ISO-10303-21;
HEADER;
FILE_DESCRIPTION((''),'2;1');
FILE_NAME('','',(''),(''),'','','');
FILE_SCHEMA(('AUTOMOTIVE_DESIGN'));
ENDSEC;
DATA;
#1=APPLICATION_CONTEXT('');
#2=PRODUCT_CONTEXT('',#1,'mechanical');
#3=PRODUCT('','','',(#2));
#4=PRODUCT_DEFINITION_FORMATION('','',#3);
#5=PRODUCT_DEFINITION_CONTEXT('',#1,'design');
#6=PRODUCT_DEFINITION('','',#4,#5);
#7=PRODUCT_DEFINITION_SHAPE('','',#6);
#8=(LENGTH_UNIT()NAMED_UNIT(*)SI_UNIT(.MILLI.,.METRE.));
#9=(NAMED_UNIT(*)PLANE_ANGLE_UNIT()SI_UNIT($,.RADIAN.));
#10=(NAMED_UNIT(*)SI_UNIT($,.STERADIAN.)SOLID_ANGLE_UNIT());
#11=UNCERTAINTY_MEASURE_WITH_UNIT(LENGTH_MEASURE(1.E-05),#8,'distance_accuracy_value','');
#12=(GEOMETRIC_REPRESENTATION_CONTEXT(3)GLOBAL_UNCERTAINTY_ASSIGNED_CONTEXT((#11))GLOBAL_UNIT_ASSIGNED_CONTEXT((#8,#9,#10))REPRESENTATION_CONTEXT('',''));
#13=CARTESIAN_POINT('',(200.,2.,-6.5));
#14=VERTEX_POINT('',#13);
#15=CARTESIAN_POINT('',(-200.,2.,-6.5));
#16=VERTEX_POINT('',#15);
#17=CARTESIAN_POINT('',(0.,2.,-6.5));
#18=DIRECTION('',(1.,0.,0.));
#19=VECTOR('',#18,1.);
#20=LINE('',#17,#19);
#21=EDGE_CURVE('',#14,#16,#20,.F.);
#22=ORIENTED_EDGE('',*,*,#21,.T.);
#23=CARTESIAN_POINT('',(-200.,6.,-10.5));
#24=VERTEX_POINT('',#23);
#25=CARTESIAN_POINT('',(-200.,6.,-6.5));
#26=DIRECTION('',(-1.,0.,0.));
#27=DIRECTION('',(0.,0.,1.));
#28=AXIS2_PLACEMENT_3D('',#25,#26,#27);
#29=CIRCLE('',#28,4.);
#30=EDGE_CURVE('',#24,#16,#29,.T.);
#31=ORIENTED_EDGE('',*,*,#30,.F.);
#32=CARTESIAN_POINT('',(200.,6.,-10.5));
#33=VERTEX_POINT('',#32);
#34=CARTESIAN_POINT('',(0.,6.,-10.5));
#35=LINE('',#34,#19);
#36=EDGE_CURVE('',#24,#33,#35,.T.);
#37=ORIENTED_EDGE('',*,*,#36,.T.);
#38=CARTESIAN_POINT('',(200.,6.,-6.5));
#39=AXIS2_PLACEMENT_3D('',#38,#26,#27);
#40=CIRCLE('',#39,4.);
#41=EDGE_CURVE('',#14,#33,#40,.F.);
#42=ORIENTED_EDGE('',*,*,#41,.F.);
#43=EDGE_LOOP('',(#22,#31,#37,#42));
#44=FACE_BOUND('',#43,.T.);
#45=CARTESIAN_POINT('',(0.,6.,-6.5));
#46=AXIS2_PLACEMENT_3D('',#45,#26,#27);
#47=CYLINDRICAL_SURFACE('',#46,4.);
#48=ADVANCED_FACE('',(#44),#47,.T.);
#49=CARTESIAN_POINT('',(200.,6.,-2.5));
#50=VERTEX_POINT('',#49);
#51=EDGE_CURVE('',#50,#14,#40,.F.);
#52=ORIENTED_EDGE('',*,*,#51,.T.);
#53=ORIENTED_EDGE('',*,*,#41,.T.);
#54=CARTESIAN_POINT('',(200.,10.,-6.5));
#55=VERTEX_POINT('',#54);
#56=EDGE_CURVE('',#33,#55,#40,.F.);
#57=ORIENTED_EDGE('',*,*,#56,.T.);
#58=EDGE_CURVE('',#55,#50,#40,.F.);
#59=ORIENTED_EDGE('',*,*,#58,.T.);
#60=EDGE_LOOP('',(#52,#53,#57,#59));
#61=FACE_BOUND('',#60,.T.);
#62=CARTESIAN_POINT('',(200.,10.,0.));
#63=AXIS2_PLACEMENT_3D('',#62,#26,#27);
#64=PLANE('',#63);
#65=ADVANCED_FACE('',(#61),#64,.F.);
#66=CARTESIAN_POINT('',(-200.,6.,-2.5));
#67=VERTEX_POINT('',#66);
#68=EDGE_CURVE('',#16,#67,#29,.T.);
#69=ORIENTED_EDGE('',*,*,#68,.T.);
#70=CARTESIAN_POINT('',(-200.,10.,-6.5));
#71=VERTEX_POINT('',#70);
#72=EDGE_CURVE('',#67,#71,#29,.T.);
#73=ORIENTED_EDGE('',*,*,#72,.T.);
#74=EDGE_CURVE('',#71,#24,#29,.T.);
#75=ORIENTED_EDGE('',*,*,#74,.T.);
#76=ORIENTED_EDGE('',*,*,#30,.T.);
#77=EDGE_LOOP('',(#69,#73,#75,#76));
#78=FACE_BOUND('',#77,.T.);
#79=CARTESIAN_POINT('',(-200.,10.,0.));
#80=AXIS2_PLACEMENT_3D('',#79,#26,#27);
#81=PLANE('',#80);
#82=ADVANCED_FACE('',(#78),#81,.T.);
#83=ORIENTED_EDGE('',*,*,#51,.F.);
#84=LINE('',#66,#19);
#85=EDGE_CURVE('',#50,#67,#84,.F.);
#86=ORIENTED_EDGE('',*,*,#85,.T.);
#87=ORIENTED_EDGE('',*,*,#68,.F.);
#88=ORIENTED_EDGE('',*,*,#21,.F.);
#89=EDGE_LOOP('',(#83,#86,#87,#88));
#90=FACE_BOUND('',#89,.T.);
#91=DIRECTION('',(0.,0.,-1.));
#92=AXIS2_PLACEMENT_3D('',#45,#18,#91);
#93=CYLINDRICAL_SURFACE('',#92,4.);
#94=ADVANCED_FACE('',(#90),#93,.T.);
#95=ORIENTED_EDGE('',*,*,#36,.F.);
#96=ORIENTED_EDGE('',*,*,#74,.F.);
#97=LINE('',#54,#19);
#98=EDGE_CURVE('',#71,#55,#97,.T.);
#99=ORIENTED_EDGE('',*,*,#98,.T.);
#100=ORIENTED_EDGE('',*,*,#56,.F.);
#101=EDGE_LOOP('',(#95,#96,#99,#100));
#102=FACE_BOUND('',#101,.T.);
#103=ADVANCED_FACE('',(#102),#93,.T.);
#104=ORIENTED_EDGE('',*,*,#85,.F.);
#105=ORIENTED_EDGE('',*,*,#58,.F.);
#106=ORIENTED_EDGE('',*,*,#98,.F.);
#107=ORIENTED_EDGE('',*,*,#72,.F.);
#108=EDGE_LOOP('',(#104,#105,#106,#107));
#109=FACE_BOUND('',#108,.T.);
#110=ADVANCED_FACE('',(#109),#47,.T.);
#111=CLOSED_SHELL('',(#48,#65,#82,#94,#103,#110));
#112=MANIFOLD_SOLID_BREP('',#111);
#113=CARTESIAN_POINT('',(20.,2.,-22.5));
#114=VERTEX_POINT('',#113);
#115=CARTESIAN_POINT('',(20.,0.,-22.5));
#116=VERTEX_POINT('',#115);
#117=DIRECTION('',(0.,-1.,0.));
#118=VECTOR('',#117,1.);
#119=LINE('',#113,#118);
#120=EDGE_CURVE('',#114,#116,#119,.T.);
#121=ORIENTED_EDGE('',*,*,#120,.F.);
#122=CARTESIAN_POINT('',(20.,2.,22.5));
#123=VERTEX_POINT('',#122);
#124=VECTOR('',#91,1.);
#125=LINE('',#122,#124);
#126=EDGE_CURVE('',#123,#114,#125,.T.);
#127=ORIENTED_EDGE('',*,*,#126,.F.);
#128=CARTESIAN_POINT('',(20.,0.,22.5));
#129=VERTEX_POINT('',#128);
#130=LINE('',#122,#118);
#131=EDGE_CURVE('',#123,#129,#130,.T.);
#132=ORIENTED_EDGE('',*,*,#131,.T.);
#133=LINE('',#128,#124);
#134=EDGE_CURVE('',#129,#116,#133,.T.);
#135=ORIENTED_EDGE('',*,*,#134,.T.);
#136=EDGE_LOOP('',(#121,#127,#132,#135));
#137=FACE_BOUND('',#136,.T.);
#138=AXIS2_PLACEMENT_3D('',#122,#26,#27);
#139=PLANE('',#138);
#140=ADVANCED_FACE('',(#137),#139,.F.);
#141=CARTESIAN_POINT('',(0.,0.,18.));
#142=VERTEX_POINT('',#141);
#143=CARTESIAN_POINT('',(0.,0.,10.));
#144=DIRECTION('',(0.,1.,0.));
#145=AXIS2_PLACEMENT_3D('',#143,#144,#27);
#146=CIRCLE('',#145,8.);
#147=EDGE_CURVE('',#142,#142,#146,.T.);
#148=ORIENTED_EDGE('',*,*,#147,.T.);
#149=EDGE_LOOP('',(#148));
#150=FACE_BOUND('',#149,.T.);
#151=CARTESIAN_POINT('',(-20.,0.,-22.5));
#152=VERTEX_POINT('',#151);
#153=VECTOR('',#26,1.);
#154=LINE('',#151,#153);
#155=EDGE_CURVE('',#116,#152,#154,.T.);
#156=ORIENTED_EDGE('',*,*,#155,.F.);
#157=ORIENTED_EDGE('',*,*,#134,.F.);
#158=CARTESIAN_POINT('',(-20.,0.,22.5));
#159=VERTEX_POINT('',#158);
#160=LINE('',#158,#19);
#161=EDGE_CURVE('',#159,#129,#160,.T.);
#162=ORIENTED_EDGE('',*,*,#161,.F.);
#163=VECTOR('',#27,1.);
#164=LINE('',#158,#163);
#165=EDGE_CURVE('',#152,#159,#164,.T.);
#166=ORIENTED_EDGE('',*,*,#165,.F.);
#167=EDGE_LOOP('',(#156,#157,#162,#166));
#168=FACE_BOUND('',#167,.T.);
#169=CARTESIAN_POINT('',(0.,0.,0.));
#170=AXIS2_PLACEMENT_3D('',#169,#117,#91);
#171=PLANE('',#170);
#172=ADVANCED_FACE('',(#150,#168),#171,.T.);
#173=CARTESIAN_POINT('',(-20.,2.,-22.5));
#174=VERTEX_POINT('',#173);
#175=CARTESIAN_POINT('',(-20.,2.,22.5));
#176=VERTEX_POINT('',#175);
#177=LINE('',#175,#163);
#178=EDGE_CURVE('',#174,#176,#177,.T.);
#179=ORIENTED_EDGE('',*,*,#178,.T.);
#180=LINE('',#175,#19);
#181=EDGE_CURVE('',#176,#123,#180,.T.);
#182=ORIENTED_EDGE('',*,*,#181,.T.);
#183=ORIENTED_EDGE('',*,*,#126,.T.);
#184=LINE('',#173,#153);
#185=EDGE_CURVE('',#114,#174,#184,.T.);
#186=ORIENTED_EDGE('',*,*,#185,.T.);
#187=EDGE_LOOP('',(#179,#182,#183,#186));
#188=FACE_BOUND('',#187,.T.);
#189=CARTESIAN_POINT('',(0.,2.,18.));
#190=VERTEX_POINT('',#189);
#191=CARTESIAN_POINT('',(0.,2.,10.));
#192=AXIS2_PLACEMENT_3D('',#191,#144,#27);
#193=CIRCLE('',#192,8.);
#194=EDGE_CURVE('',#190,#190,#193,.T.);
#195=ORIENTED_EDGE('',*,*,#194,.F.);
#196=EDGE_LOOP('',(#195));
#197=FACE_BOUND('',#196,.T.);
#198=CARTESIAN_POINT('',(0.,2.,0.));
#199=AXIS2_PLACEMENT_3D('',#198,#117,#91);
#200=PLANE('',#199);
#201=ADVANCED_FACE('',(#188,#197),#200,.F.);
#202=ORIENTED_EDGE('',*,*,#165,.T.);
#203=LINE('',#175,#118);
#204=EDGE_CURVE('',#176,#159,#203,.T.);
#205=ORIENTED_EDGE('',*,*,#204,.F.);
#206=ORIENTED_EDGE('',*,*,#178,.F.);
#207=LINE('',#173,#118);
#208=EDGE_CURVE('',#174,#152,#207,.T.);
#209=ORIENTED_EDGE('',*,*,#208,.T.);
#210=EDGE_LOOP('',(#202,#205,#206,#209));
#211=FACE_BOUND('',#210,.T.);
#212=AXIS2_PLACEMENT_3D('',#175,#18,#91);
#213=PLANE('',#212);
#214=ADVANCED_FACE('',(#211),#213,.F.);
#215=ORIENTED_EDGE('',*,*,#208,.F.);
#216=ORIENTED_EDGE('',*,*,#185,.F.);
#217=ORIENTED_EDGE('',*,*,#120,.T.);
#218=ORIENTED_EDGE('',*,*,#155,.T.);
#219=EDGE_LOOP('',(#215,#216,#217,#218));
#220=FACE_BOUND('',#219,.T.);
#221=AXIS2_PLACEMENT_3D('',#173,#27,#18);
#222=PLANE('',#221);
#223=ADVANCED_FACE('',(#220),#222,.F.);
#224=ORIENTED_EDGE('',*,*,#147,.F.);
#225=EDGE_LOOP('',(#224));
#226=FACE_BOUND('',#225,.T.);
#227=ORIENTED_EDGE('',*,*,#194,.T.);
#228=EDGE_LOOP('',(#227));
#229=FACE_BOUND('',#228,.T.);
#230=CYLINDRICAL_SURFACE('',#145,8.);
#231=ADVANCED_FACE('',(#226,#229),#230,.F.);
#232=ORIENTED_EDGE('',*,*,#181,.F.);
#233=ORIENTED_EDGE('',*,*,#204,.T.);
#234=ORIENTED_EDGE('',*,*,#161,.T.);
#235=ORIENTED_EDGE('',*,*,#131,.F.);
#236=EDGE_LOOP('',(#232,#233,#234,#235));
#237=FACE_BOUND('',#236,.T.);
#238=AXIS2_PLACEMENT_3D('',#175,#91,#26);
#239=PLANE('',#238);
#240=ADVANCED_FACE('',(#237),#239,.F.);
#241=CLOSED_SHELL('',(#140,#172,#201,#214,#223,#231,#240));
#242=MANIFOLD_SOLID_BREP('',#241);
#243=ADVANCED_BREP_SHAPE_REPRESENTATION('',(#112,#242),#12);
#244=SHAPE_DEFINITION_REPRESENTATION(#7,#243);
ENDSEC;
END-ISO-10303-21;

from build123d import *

# Parameters (mm, degrees)
SKETCH3_W           = 40
SKETCH3_H           = 45
BOSS_EXTRUDE1_DEPTH = 2
BOSS_EXTRUDE3_DEPTH = 8
FILLET2_R           = 4
SKETCH5_R           = 8
CUT_EXTRUDE1_DEPTH  = 202.420579882


with BuildPart() as part:
    # Sketch3 → Boss-Extrude1 (new body)
    with BuildSketch(Plane(origin=(0, 0, 0), x_dir=(1, 0, 0), z_dir=(0, 1, 0))):
        Rectangle(SKETCH3_W, SKETCH3_H)
    extrude(amount=BOSS_EXTRUDE1_DEPTH)

    # Sketch5 → Cut-Extrude1 (cut, through all)
    with BuildSketch(Plane(origin=(0, 2, 0), x_dir=(1, 0, 0), z_dir=(0, 1, 0))):
        with Locations(Location((0, -10, 0), (0, 0, 270))):
            Circle(SKETCH5_R)
    extrude(amount=-CUT_EXTRUDE1_DEPTH, mode=Mode.SUBTRACT)


with BuildPart() as body_2:
    # Sketch4 → Boss-Extrude3 (new body)
    with BuildSketch(Plane(origin=(0, 2, 0), x_dir=(1, 0, 0), z_dir=(0, 1, 0))):
        Polygon((-200, 10.5), (-200, 2.5), (0, 2.5), (200, 2.5), (200, 10.5), align=None)
    extrude(amount=BOSS_EXTRUDE3_DEPTH)

    # Fillet2
    fillet2_edges = [body_2.edges().sort_by_distance(p)[0] for p in [
        (0, 2, -10.5),
        (0, 2, -2.5),
        (0, 10, -2.5),
        (0, 10, -10.5),
    ]]
    fillet(fillet2_edges, radius=FILLET2_R - 0.0001)  # a hair under: the kernel refuses the full size


solid = Compound([part.part, body_2.part])
